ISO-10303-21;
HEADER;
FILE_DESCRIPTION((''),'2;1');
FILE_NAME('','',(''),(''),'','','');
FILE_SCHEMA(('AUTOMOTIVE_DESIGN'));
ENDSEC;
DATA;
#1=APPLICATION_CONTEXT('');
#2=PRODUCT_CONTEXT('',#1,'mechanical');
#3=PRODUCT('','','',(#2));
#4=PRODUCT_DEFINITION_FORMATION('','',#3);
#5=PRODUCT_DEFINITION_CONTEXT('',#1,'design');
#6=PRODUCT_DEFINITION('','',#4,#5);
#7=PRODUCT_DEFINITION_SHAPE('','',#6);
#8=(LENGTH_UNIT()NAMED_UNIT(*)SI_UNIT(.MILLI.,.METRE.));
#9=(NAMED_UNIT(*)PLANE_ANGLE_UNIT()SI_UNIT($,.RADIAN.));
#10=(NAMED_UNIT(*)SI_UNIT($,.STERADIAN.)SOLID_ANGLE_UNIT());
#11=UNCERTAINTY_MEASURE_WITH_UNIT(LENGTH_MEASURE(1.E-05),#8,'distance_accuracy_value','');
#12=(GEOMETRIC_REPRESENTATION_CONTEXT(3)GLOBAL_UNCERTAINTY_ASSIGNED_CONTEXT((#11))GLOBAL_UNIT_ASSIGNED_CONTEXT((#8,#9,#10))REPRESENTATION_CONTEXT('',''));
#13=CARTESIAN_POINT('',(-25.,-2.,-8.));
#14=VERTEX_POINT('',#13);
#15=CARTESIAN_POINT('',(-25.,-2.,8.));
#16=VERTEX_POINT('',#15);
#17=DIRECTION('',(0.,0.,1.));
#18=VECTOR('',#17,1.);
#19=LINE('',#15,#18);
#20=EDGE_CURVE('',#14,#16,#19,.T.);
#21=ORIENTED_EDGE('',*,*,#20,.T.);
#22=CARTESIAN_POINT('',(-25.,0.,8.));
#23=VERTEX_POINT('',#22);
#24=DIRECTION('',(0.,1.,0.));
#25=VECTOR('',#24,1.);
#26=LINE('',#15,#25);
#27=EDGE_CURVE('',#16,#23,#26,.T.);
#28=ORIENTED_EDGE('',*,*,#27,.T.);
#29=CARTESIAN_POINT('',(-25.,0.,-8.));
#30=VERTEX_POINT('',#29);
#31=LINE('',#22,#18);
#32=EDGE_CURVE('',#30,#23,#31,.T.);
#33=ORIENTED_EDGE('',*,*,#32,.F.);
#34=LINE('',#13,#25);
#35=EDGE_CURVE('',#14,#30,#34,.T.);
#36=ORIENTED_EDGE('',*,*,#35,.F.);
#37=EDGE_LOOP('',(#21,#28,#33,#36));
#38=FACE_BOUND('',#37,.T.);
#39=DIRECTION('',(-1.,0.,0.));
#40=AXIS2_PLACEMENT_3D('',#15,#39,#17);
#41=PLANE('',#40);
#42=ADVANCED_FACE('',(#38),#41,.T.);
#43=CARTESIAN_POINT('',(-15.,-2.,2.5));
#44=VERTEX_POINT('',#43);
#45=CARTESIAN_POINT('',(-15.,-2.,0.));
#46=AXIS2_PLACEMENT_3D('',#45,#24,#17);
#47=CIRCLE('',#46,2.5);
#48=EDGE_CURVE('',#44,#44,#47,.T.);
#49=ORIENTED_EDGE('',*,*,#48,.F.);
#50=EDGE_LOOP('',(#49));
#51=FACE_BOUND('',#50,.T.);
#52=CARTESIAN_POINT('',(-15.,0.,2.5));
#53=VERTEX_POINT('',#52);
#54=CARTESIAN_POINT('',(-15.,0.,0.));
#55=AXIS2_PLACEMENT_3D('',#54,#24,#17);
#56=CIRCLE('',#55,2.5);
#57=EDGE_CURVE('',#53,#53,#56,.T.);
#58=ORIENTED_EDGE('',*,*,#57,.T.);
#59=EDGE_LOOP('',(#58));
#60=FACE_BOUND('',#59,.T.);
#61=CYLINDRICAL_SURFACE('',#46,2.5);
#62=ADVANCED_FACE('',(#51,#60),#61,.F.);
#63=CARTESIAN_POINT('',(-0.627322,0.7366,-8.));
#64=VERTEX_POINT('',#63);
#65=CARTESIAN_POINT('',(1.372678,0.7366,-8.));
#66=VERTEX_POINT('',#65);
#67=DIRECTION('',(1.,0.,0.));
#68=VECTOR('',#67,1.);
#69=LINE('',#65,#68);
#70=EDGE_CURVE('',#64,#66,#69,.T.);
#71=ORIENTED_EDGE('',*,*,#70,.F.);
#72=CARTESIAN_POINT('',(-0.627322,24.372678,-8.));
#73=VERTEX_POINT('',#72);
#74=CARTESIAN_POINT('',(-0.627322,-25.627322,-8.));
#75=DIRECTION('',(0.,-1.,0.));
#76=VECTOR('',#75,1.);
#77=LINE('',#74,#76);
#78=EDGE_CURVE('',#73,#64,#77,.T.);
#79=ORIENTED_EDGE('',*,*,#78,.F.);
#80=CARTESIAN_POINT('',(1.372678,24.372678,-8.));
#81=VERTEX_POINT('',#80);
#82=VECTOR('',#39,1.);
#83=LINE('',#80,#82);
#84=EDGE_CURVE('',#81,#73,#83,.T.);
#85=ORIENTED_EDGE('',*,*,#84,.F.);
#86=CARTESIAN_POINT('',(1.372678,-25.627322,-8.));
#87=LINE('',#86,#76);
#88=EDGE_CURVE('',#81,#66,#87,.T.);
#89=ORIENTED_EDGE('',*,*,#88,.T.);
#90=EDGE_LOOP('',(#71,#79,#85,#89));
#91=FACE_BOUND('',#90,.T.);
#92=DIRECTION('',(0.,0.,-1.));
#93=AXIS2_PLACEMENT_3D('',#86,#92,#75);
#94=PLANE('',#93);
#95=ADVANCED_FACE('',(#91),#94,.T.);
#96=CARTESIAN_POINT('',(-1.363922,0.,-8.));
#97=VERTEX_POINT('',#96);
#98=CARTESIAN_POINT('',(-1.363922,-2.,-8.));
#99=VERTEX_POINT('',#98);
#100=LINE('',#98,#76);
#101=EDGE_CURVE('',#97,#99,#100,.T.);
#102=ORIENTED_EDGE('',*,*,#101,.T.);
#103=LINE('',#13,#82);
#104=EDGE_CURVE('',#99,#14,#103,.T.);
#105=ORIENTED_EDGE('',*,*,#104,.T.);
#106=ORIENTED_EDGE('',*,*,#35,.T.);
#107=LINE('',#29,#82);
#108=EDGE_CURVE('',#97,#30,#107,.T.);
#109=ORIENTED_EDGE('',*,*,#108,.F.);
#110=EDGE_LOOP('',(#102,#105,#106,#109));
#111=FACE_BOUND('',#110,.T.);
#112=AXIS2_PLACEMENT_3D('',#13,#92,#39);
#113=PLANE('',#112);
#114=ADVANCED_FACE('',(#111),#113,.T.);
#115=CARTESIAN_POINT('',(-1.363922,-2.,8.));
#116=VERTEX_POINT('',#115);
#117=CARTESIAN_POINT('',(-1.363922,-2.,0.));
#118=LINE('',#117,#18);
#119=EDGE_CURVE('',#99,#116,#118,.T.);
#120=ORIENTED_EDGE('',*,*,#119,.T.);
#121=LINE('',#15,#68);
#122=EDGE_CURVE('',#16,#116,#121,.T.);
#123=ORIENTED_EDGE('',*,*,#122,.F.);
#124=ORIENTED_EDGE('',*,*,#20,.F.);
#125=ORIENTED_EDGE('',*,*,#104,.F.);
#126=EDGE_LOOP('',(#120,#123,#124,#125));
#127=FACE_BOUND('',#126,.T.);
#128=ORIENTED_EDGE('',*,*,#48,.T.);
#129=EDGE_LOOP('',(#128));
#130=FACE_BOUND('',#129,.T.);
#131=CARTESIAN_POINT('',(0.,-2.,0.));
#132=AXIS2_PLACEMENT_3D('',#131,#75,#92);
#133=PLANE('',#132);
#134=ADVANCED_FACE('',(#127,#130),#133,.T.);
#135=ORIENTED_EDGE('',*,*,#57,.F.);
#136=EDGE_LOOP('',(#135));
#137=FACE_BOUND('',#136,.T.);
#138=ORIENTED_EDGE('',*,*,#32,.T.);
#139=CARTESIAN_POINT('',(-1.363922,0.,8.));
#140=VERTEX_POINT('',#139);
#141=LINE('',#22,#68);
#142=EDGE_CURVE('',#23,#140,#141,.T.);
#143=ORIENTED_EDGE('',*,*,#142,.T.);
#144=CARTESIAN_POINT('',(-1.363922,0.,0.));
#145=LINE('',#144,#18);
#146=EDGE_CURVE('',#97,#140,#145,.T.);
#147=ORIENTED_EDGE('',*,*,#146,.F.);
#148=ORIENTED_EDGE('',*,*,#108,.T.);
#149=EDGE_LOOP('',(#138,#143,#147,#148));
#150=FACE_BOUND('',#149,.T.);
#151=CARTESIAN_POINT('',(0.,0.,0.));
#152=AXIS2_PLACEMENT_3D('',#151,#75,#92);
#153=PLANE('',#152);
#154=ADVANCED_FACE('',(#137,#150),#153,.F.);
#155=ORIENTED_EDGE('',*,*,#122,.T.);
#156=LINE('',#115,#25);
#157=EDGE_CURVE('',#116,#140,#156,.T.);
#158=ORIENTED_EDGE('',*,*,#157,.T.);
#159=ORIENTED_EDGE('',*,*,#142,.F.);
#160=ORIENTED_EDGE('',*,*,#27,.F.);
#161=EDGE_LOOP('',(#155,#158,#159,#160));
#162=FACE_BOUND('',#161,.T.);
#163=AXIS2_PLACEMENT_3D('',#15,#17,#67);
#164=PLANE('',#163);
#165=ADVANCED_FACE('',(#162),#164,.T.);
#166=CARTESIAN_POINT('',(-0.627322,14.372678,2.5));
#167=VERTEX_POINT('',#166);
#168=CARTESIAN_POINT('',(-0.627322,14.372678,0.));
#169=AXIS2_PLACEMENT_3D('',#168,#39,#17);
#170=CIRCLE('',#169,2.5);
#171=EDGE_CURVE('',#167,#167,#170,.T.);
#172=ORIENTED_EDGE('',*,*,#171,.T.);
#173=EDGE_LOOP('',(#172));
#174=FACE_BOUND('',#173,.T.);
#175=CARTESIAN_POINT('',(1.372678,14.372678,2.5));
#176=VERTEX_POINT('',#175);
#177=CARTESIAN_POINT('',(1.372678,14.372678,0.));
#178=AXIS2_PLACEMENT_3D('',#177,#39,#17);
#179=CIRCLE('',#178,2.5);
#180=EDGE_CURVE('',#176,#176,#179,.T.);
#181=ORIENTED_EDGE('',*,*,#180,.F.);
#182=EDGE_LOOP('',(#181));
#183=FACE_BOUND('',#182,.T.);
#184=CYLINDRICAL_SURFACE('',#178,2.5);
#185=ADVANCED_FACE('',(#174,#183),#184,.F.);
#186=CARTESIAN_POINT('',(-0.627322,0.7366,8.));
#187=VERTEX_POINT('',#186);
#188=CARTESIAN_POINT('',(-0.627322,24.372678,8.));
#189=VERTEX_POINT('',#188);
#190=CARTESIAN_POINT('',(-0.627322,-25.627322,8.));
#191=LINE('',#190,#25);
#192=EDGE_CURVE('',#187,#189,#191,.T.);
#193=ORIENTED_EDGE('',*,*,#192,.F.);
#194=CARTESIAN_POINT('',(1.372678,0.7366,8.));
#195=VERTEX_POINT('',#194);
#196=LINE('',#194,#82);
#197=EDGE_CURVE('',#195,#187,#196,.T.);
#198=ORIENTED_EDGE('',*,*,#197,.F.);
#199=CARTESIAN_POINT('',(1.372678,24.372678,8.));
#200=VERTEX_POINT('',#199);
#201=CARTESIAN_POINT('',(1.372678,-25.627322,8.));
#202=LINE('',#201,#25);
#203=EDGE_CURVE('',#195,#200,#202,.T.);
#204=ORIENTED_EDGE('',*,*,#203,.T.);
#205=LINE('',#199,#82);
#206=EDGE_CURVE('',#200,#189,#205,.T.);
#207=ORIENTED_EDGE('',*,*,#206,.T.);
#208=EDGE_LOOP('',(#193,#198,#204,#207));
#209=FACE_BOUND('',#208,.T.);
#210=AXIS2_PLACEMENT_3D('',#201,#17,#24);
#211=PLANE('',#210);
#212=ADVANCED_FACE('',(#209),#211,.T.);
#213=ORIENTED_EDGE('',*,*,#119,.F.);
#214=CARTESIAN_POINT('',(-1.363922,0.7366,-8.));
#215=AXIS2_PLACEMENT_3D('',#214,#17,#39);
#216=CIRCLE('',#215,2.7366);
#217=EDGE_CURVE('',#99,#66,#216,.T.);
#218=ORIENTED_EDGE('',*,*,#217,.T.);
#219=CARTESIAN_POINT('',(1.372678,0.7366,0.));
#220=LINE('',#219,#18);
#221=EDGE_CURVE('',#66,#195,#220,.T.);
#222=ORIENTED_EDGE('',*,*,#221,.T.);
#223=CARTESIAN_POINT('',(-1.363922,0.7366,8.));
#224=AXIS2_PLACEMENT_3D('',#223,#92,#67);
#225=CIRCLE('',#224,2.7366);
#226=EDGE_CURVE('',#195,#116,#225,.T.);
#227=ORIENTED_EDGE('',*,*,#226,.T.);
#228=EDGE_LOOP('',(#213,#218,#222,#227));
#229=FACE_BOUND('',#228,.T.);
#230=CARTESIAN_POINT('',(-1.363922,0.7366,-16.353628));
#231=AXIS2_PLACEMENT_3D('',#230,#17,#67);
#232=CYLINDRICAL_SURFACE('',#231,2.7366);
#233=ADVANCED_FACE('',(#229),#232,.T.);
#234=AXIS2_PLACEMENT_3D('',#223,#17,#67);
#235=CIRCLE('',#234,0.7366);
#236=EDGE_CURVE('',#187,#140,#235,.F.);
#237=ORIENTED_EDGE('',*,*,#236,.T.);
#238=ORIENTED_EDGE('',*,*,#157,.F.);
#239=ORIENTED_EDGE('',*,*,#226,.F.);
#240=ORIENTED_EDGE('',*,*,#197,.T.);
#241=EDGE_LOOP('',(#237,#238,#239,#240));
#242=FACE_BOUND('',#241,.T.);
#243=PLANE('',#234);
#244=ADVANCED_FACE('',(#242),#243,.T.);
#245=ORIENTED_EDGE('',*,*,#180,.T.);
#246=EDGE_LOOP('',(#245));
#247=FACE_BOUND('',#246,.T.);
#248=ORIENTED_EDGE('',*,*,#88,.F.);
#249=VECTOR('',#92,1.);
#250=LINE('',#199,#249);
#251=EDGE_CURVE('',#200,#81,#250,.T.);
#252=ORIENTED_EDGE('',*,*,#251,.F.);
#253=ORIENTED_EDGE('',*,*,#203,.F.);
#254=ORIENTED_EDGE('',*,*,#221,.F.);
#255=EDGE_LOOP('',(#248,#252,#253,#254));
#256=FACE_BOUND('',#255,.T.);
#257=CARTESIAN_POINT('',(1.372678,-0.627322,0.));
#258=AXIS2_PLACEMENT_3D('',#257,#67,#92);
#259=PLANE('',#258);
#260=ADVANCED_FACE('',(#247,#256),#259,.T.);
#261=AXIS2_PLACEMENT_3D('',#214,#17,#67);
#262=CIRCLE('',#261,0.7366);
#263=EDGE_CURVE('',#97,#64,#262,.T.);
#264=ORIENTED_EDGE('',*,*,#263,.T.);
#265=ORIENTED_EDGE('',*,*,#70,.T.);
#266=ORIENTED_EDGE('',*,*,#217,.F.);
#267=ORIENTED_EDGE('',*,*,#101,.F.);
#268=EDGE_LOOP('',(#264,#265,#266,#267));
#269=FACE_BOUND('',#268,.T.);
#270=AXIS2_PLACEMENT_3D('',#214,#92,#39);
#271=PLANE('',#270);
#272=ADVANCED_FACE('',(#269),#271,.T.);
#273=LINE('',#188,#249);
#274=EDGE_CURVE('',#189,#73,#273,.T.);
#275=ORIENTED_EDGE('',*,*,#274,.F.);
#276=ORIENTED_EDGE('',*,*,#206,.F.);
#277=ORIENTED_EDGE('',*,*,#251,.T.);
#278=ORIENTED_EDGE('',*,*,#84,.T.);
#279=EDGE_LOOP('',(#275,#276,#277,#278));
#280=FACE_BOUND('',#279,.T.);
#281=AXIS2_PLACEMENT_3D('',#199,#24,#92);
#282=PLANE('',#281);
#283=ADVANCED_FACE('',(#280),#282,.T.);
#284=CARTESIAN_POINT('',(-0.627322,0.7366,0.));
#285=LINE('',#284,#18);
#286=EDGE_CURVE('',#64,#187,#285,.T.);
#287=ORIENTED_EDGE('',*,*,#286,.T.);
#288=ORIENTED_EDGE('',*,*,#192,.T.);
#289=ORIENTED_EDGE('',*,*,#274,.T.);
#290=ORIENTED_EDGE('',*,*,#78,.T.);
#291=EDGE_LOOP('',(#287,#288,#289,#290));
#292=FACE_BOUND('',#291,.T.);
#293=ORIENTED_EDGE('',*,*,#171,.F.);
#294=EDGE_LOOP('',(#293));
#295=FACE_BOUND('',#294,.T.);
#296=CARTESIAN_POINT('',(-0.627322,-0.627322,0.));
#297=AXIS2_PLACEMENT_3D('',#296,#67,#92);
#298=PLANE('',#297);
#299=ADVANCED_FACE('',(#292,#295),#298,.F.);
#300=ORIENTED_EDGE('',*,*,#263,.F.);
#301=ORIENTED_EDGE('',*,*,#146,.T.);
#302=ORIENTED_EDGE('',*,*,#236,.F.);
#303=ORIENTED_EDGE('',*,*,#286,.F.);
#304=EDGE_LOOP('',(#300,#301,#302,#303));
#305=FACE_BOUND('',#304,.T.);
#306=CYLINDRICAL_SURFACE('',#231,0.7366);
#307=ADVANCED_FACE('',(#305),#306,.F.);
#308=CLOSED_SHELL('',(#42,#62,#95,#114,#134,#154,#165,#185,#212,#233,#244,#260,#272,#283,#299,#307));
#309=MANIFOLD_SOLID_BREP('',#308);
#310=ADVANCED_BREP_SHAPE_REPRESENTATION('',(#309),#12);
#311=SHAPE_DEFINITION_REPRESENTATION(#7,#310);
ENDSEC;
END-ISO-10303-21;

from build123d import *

# Parameters (mm, degrees)
CROQUIS2_W                      = 50
CROQUIS2_H                      = 16
CROQUIS2_R                      = 2.5
BRIDA_BASE1_DEPTH               = 2
PLIEGUE_START                   = -8
PLIEGUE_CROQUIZADO1_DEPTH       = 16
PLIEGUE_CROQUIZADO1_2_DEPTH     = 5.4999999
PLIEGUE_START_2                 = 2.5000001
PLIEGUE_CROQUIZADO1_3_DEPTH     = 5.4999999
PLIEGUE_START_3                 = -2.5000001
PLIEGUE_CROQUIZADO1_4_DEPTH     = 5.0000002
PLIEGUE_START_4                 = -0.627322451
PLIEGUE_CROQUIZADO1_5_OUTLINE_R = 2.5
PLIEGUE_CROQUIZADO1_5_DEPTH     = 2


with BuildPart() as part:
    # Brida base1: sheet metal written as solids
    # Croquis2 → Brida base1 (new body)
    with BuildSketch(Plane(origin=(0, 0, 0), x_dir=(1, 0, 0), z_dir=(0, 1, 0))):
        Rectangle(CROQUIS2_W, CROQUIS2_H)
        with Locations(Location((15, 0, 0), (0, 0, 270))):
            Circle(CROQUIS2_R, mode=Mode.SUBTRACT)
        with Locations(Location((-15, 0, 0), (0, 0, 270))):
            Circle(CROQUIS2_R, mode=Mode.SUBTRACT)
    extrude(amount=-BRIDA_BASE1_DEPTH)

    # Pliegue croquizado1: read off the stored shape, not the designer's step
    # Pliegue croquizado1 outline → Pliegue croquizado1 (cut)
    with BuildSketch(Plane.XY.offset(PLIEGUE_START)):
        with BuildLine():
            Line((25, 0), (1.271679947, 0))
            ThreePointArc((1.271679947, 0), (0.290344758, -1.443395312), (-1.363922451, -2))
            Line((-1.363922451, -2), (25, -2))
            Line((25, -2), (25, 0))
        make_face()
    extrude(amount=PLIEGUE_CROQUIZADO1_DEPTH, mode=Mode.SUBTRACT)

    # Pliegue croquizado1 2 outline → Pliegue croquizado1 2 (add)
    with BuildSketch(Plane.XY.offset(PLIEGUE_START)):
        with BuildLine():
            Line((-0.627322451, 24.372677549), (-0.627322451, 0.7366))
            ThreePointArc((-0.627322451, 0.7366), (-0.843067596, 0.215745145), (-1.363922451, 0))
            Line((-1.363922451, 0), (1.271679947, 0))
            ThreePointArc((1.271679947, 0), (1.347310579, 0.364854094), (1.372677549, 0.7366))
            Line((1.372677549, 0.7366), (1.372677549, 24.372677549))
            Line((1.372677549, 24.372677549), (-0.627322451, 24.372677549))
        make_face()
    extrude(amount=PLIEGUE_CROQUIZADO1_2_DEPTH)

    # Pliegue croquizado1 3 outline → Pliegue croquizado1 3 (add)
    with BuildSketch(Plane.XY.offset(PLIEGUE_START_2)):
        with BuildLine():
            Line((-0.627322451, 24.372677549), (-0.627322451, 0.7366))
            ThreePointArc((-0.627322451, 0.7366), (-0.843067596, 0.215745145), (-1.363922451, 0))
            Line((-1.363922451, 0), (1.271679947, 0))
            ThreePointArc((1.271679947, 0), (1.347310579, 0.364854094), (1.372677549, 0.7366))
            Line((1.372677549, 0.7366), (1.372677549, 24.372677549))
            Line((1.372677549, 24.372677549), (-0.627322451, 24.372677549))
        make_face()
    extrude(amount=PLIEGUE_CROQUIZADO1_3_DEPTH)

    # Pliegue croquizado1 4 outline → Pliegue croquizado1 4 (add)
    with BuildSketch(Plane.XY.offset(PLIEGUE_START_3)):
        with BuildLine():
            Line((-0.627322451, 24.372677549), (-0.627322451, 0.7366))
            ThreePointArc((-0.627322451, 0.7366), (-0.843067596, 0.215745145), (-1.363922451, 0))
            Line((-1.363922451, 0), (1.271679947, 0))
            ThreePointArc((1.271679947, 0), (1.347310579, 0.364854094), (1.372677549, 0.7366))
            Line((1.372677549, 0.7366), (1.372677549, 24.372677549))
            Line((1.372677549, 24.372677549), (-0.627322451, 24.372677549))
        make_face()
    extrude(amount=PLIEGUE_CROQUIZADO1_4_DEPTH)

    # Pliegue croquizado1 5 outline → Pliegue croquizado1 5 (cut)
    with BuildSketch(Plane.YZ.offset(PLIEGUE_START_4)):
        with Locations((14.372677549, 0)):
            Circle(PLIEGUE_CROQUIZADO1_5_OUTLINE_R)
    extrude(amount=PLIEGUE_CROQUIZADO1_5_DEPTH, mode=Mode.SUBTRACT)


solid = part.part
